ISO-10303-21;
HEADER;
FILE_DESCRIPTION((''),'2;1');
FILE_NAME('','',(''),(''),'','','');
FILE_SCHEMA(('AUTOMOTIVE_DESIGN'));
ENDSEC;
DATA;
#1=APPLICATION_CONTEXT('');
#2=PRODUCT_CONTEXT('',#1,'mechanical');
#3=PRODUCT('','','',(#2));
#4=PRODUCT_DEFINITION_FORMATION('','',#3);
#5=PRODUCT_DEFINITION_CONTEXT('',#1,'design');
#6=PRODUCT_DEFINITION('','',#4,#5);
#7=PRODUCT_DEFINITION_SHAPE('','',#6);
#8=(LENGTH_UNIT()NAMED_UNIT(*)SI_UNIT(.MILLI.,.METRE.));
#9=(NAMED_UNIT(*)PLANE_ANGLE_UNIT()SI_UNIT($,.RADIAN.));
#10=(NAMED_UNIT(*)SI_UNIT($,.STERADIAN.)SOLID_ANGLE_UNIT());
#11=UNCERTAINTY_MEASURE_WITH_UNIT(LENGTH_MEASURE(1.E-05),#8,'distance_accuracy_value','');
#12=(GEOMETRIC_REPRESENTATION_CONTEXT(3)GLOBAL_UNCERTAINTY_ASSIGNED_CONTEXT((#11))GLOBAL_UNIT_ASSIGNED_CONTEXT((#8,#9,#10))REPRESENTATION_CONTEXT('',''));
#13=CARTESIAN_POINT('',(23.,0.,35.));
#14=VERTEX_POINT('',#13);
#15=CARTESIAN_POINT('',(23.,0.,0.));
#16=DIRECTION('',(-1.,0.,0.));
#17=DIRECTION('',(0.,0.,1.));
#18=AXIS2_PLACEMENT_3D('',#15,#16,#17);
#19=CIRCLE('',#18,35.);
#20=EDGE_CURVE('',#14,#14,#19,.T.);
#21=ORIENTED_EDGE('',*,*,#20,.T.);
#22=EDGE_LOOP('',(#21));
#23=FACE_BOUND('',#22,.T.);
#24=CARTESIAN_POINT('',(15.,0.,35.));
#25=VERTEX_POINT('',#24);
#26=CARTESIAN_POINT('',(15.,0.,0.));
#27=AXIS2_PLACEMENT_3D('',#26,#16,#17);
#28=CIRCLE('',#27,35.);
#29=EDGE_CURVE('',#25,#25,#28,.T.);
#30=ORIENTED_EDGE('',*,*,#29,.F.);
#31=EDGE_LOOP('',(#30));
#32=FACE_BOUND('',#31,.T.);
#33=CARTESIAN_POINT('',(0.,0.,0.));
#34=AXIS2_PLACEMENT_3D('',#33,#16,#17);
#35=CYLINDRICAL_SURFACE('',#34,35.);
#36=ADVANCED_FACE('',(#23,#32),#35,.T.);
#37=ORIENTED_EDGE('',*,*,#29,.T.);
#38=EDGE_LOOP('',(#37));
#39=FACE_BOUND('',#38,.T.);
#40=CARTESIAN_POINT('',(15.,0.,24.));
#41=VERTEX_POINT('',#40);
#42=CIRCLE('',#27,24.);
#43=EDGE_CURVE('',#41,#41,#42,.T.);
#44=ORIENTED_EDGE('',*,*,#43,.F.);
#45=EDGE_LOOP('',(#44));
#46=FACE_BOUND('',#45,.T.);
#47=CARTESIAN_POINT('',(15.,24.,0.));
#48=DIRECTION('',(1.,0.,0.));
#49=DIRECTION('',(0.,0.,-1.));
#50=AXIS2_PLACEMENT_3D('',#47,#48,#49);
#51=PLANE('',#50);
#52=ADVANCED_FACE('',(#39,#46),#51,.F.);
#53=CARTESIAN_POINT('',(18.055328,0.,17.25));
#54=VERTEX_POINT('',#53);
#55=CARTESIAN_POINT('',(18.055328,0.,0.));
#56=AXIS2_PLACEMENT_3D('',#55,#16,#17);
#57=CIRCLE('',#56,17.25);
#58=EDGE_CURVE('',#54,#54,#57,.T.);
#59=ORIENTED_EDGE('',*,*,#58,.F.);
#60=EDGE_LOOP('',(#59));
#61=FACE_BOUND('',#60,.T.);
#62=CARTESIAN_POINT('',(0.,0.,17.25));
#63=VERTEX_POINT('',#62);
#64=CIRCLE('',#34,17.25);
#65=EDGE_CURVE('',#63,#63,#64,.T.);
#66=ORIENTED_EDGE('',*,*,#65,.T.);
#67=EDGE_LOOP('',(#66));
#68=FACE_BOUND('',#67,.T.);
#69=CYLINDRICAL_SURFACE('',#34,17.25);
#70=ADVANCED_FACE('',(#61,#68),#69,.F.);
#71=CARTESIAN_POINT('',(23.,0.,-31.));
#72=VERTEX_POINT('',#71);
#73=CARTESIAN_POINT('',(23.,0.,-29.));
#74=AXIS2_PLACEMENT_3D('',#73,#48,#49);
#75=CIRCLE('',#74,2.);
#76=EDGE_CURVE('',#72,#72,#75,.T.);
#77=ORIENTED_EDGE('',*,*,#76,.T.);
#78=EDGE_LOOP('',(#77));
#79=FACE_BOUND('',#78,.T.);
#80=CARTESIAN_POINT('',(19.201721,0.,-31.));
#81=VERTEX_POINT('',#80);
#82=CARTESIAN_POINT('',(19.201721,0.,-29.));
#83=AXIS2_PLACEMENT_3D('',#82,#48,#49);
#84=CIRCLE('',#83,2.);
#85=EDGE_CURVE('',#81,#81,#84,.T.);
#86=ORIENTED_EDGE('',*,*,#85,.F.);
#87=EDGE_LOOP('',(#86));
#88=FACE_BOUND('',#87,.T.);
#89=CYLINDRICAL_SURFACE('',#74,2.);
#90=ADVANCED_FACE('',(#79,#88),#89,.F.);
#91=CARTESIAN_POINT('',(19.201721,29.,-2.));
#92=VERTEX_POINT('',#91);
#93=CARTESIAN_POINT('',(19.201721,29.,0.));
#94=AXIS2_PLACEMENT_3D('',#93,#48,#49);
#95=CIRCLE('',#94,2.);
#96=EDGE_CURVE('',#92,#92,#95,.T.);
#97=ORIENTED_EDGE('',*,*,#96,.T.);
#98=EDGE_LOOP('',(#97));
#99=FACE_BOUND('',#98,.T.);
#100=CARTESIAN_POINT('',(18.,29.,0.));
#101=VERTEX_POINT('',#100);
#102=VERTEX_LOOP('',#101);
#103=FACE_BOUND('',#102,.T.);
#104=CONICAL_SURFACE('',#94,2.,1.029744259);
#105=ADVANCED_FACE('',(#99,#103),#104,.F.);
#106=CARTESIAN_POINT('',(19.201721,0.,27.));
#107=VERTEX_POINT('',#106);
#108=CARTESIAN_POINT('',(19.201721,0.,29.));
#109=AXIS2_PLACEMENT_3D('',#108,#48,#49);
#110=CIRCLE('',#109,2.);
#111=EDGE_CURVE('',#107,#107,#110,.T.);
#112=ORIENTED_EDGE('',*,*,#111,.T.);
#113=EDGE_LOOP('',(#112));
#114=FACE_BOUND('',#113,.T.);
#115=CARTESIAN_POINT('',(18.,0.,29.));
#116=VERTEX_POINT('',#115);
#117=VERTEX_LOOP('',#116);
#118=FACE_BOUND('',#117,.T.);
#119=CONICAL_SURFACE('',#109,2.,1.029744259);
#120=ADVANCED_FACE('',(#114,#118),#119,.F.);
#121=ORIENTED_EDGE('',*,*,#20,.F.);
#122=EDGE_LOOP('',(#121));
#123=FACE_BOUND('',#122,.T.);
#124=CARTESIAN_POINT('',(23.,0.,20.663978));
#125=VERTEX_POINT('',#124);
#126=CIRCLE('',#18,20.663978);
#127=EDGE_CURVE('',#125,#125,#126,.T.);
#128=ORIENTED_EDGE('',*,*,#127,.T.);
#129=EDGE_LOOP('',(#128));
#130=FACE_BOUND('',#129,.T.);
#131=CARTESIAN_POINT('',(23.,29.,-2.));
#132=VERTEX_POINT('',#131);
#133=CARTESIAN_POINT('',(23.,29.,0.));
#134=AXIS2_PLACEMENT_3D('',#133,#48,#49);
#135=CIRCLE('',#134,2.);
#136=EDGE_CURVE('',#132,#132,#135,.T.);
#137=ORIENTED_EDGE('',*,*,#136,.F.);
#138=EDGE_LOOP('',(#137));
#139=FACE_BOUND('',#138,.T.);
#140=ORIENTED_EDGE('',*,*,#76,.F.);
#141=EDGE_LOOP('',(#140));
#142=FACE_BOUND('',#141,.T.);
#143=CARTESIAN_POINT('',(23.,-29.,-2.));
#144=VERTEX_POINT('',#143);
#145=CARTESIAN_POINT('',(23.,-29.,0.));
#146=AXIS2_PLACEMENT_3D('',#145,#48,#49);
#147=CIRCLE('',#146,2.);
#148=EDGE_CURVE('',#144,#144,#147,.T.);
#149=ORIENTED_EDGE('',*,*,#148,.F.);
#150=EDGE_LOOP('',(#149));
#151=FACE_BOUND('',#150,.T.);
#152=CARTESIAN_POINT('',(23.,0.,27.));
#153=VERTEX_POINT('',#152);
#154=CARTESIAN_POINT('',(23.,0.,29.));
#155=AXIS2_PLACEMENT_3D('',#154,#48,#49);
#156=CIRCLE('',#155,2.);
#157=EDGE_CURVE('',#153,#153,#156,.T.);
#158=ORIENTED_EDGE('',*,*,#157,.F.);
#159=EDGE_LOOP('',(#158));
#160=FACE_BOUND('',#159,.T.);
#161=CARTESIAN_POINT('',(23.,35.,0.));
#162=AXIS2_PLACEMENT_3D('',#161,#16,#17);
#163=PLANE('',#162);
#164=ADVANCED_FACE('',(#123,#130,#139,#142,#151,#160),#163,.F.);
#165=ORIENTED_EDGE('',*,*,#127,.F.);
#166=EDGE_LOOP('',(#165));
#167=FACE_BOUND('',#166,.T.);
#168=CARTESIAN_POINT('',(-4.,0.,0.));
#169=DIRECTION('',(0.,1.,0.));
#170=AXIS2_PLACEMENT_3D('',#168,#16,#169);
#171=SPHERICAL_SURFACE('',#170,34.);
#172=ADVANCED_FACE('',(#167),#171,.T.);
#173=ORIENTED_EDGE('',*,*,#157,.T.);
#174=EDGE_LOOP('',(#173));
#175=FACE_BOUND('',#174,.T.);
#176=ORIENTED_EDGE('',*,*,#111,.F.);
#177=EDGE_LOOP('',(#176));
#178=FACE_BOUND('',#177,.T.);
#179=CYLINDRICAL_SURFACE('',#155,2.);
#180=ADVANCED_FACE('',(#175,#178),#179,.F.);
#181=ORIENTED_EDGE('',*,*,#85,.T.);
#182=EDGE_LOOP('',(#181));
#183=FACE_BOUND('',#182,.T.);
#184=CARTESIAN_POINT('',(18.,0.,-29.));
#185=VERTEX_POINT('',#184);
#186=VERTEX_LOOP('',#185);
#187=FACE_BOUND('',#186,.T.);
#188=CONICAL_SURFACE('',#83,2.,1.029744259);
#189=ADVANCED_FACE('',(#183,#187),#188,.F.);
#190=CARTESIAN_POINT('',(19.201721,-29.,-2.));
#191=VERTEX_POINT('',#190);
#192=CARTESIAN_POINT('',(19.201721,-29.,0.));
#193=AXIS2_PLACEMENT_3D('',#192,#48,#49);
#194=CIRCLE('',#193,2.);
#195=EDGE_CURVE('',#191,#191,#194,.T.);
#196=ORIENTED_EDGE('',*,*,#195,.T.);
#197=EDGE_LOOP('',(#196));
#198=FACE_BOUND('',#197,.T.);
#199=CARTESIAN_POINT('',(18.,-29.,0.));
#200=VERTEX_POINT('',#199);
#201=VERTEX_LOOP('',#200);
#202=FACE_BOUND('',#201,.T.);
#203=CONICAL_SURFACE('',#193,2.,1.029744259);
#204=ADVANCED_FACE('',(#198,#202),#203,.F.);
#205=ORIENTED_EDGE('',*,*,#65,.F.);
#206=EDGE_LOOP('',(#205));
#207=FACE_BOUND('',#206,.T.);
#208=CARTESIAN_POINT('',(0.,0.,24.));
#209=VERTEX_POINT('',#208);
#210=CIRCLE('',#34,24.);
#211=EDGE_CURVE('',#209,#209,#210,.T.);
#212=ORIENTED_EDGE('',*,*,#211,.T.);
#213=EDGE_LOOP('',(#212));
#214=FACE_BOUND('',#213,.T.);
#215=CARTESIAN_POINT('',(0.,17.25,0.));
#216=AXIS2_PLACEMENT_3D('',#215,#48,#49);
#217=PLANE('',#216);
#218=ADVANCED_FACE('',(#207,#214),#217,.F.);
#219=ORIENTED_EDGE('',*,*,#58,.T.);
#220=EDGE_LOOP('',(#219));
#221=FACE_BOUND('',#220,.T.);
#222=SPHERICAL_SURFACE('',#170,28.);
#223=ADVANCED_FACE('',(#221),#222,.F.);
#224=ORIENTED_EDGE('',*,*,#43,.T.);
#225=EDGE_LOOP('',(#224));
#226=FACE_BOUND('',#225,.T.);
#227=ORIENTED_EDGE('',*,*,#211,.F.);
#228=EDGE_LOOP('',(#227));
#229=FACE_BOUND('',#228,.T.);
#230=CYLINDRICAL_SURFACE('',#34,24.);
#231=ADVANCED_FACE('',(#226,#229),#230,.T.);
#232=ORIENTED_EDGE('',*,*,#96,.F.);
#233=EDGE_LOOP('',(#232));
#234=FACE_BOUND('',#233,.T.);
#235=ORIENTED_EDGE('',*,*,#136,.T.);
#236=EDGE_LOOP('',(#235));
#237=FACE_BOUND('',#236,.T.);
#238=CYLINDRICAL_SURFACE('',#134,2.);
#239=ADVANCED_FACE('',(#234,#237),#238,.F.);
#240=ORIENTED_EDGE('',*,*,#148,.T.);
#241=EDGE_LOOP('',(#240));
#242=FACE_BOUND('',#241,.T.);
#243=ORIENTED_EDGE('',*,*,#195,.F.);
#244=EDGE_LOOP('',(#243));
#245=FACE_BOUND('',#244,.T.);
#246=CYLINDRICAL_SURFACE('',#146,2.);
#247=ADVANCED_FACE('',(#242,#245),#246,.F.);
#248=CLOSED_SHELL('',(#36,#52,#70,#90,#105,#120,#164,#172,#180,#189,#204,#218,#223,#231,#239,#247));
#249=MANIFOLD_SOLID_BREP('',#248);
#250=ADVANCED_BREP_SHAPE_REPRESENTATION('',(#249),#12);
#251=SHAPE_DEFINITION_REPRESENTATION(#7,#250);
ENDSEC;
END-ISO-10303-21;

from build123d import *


# Read off the part's stored shape, not the designer's step: Ø4.0mm 暗销孔1
with BuildPart() as part:
    # 草图1 → 旋转1 (revolve)
    with BuildSketch(Plane.XY, mode=Mode.PRIVATE) as revolve_1_sk:
        with BuildLine():
            Line((0, 17.25), (0, 24))
            Line((0, 24), (15, 24))
            Line((15, 24), (15, 35))
            Line((15, 35), (23, 35))
            Line((23, 35), (23, 20.66397832))
            ThreePointArc((23, 20.66397832), (28.202484376, 10.908712115), (30, 0))
            Line((30, 0), (24, 0))
            ThreePointArc((24, 0), (22.472147517, 9.122795944), (18.055328154, 17.25))
            Line((18.055328154, 17.25), (0, 17.25))
        make_face()
    revolve(revolve_1_sk.sketch.rotate(Axis((0, 0, 0), (1, 0, 0)), 90), axis=Axis((0, 0, 0), (1, 0, 0)))

    # Ø4.0mm 暗销孔1 outline → Ø4.0mm 暗销孔1 (revolve, cut)
    with BuildSketch(Plane(origin=(0, 29, 0), x_dir=(0, 1, 0), z_dir=(0, 0, -1))):
        Polygon((0, 23), (0, 18), (2, 19.201721238), (2, 23), align=None)
    revolve(axis=Axis((0, 29, 0), (1, 0, 0)), mode=Mode.SUBTRACT)

    # 4.0mm _1 2 outline → 4.0mm _1 2 (revolve, cut)
    with BuildSketch(Plane.YX.offset(-29)):
        Polygon((0, 23), (0, 18), (2, 19.201721238), (2, 23), align=None)
    revolve(axis=Axis((0, 0, 29), (1, 0, 0)), mode=Mode.SUBTRACT)

    # 4.0mm _1 3 outline → 4.0mm _1 3 (revolve, cut)
    with BuildSketch(Plane(origin=(0, -29, 0), x_dir=(0, 1, 0), z_dir=(0, 0, -1))):
        Polygon((0, 23), (0, 18), (2, 19.201721238), (2, 23), align=None)
    revolve(axis=Axis((0, -29, 0), (1, 0, 0)), mode=Mode.SUBTRACT)

    # 4.0mm _1 4 outline → 4.0mm _1 4 (revolve, cut)
    with BuildSketch(Plane.YX.offset(29)):
        Polygon((0, 23), (0, 18), (2, 19.201721238), (2, 23), align=None)
    revolve(axis=Axis((0, 0, -29), (1, 0, 0)), mode=Mode.SUBTRACT)


solid = part.part
